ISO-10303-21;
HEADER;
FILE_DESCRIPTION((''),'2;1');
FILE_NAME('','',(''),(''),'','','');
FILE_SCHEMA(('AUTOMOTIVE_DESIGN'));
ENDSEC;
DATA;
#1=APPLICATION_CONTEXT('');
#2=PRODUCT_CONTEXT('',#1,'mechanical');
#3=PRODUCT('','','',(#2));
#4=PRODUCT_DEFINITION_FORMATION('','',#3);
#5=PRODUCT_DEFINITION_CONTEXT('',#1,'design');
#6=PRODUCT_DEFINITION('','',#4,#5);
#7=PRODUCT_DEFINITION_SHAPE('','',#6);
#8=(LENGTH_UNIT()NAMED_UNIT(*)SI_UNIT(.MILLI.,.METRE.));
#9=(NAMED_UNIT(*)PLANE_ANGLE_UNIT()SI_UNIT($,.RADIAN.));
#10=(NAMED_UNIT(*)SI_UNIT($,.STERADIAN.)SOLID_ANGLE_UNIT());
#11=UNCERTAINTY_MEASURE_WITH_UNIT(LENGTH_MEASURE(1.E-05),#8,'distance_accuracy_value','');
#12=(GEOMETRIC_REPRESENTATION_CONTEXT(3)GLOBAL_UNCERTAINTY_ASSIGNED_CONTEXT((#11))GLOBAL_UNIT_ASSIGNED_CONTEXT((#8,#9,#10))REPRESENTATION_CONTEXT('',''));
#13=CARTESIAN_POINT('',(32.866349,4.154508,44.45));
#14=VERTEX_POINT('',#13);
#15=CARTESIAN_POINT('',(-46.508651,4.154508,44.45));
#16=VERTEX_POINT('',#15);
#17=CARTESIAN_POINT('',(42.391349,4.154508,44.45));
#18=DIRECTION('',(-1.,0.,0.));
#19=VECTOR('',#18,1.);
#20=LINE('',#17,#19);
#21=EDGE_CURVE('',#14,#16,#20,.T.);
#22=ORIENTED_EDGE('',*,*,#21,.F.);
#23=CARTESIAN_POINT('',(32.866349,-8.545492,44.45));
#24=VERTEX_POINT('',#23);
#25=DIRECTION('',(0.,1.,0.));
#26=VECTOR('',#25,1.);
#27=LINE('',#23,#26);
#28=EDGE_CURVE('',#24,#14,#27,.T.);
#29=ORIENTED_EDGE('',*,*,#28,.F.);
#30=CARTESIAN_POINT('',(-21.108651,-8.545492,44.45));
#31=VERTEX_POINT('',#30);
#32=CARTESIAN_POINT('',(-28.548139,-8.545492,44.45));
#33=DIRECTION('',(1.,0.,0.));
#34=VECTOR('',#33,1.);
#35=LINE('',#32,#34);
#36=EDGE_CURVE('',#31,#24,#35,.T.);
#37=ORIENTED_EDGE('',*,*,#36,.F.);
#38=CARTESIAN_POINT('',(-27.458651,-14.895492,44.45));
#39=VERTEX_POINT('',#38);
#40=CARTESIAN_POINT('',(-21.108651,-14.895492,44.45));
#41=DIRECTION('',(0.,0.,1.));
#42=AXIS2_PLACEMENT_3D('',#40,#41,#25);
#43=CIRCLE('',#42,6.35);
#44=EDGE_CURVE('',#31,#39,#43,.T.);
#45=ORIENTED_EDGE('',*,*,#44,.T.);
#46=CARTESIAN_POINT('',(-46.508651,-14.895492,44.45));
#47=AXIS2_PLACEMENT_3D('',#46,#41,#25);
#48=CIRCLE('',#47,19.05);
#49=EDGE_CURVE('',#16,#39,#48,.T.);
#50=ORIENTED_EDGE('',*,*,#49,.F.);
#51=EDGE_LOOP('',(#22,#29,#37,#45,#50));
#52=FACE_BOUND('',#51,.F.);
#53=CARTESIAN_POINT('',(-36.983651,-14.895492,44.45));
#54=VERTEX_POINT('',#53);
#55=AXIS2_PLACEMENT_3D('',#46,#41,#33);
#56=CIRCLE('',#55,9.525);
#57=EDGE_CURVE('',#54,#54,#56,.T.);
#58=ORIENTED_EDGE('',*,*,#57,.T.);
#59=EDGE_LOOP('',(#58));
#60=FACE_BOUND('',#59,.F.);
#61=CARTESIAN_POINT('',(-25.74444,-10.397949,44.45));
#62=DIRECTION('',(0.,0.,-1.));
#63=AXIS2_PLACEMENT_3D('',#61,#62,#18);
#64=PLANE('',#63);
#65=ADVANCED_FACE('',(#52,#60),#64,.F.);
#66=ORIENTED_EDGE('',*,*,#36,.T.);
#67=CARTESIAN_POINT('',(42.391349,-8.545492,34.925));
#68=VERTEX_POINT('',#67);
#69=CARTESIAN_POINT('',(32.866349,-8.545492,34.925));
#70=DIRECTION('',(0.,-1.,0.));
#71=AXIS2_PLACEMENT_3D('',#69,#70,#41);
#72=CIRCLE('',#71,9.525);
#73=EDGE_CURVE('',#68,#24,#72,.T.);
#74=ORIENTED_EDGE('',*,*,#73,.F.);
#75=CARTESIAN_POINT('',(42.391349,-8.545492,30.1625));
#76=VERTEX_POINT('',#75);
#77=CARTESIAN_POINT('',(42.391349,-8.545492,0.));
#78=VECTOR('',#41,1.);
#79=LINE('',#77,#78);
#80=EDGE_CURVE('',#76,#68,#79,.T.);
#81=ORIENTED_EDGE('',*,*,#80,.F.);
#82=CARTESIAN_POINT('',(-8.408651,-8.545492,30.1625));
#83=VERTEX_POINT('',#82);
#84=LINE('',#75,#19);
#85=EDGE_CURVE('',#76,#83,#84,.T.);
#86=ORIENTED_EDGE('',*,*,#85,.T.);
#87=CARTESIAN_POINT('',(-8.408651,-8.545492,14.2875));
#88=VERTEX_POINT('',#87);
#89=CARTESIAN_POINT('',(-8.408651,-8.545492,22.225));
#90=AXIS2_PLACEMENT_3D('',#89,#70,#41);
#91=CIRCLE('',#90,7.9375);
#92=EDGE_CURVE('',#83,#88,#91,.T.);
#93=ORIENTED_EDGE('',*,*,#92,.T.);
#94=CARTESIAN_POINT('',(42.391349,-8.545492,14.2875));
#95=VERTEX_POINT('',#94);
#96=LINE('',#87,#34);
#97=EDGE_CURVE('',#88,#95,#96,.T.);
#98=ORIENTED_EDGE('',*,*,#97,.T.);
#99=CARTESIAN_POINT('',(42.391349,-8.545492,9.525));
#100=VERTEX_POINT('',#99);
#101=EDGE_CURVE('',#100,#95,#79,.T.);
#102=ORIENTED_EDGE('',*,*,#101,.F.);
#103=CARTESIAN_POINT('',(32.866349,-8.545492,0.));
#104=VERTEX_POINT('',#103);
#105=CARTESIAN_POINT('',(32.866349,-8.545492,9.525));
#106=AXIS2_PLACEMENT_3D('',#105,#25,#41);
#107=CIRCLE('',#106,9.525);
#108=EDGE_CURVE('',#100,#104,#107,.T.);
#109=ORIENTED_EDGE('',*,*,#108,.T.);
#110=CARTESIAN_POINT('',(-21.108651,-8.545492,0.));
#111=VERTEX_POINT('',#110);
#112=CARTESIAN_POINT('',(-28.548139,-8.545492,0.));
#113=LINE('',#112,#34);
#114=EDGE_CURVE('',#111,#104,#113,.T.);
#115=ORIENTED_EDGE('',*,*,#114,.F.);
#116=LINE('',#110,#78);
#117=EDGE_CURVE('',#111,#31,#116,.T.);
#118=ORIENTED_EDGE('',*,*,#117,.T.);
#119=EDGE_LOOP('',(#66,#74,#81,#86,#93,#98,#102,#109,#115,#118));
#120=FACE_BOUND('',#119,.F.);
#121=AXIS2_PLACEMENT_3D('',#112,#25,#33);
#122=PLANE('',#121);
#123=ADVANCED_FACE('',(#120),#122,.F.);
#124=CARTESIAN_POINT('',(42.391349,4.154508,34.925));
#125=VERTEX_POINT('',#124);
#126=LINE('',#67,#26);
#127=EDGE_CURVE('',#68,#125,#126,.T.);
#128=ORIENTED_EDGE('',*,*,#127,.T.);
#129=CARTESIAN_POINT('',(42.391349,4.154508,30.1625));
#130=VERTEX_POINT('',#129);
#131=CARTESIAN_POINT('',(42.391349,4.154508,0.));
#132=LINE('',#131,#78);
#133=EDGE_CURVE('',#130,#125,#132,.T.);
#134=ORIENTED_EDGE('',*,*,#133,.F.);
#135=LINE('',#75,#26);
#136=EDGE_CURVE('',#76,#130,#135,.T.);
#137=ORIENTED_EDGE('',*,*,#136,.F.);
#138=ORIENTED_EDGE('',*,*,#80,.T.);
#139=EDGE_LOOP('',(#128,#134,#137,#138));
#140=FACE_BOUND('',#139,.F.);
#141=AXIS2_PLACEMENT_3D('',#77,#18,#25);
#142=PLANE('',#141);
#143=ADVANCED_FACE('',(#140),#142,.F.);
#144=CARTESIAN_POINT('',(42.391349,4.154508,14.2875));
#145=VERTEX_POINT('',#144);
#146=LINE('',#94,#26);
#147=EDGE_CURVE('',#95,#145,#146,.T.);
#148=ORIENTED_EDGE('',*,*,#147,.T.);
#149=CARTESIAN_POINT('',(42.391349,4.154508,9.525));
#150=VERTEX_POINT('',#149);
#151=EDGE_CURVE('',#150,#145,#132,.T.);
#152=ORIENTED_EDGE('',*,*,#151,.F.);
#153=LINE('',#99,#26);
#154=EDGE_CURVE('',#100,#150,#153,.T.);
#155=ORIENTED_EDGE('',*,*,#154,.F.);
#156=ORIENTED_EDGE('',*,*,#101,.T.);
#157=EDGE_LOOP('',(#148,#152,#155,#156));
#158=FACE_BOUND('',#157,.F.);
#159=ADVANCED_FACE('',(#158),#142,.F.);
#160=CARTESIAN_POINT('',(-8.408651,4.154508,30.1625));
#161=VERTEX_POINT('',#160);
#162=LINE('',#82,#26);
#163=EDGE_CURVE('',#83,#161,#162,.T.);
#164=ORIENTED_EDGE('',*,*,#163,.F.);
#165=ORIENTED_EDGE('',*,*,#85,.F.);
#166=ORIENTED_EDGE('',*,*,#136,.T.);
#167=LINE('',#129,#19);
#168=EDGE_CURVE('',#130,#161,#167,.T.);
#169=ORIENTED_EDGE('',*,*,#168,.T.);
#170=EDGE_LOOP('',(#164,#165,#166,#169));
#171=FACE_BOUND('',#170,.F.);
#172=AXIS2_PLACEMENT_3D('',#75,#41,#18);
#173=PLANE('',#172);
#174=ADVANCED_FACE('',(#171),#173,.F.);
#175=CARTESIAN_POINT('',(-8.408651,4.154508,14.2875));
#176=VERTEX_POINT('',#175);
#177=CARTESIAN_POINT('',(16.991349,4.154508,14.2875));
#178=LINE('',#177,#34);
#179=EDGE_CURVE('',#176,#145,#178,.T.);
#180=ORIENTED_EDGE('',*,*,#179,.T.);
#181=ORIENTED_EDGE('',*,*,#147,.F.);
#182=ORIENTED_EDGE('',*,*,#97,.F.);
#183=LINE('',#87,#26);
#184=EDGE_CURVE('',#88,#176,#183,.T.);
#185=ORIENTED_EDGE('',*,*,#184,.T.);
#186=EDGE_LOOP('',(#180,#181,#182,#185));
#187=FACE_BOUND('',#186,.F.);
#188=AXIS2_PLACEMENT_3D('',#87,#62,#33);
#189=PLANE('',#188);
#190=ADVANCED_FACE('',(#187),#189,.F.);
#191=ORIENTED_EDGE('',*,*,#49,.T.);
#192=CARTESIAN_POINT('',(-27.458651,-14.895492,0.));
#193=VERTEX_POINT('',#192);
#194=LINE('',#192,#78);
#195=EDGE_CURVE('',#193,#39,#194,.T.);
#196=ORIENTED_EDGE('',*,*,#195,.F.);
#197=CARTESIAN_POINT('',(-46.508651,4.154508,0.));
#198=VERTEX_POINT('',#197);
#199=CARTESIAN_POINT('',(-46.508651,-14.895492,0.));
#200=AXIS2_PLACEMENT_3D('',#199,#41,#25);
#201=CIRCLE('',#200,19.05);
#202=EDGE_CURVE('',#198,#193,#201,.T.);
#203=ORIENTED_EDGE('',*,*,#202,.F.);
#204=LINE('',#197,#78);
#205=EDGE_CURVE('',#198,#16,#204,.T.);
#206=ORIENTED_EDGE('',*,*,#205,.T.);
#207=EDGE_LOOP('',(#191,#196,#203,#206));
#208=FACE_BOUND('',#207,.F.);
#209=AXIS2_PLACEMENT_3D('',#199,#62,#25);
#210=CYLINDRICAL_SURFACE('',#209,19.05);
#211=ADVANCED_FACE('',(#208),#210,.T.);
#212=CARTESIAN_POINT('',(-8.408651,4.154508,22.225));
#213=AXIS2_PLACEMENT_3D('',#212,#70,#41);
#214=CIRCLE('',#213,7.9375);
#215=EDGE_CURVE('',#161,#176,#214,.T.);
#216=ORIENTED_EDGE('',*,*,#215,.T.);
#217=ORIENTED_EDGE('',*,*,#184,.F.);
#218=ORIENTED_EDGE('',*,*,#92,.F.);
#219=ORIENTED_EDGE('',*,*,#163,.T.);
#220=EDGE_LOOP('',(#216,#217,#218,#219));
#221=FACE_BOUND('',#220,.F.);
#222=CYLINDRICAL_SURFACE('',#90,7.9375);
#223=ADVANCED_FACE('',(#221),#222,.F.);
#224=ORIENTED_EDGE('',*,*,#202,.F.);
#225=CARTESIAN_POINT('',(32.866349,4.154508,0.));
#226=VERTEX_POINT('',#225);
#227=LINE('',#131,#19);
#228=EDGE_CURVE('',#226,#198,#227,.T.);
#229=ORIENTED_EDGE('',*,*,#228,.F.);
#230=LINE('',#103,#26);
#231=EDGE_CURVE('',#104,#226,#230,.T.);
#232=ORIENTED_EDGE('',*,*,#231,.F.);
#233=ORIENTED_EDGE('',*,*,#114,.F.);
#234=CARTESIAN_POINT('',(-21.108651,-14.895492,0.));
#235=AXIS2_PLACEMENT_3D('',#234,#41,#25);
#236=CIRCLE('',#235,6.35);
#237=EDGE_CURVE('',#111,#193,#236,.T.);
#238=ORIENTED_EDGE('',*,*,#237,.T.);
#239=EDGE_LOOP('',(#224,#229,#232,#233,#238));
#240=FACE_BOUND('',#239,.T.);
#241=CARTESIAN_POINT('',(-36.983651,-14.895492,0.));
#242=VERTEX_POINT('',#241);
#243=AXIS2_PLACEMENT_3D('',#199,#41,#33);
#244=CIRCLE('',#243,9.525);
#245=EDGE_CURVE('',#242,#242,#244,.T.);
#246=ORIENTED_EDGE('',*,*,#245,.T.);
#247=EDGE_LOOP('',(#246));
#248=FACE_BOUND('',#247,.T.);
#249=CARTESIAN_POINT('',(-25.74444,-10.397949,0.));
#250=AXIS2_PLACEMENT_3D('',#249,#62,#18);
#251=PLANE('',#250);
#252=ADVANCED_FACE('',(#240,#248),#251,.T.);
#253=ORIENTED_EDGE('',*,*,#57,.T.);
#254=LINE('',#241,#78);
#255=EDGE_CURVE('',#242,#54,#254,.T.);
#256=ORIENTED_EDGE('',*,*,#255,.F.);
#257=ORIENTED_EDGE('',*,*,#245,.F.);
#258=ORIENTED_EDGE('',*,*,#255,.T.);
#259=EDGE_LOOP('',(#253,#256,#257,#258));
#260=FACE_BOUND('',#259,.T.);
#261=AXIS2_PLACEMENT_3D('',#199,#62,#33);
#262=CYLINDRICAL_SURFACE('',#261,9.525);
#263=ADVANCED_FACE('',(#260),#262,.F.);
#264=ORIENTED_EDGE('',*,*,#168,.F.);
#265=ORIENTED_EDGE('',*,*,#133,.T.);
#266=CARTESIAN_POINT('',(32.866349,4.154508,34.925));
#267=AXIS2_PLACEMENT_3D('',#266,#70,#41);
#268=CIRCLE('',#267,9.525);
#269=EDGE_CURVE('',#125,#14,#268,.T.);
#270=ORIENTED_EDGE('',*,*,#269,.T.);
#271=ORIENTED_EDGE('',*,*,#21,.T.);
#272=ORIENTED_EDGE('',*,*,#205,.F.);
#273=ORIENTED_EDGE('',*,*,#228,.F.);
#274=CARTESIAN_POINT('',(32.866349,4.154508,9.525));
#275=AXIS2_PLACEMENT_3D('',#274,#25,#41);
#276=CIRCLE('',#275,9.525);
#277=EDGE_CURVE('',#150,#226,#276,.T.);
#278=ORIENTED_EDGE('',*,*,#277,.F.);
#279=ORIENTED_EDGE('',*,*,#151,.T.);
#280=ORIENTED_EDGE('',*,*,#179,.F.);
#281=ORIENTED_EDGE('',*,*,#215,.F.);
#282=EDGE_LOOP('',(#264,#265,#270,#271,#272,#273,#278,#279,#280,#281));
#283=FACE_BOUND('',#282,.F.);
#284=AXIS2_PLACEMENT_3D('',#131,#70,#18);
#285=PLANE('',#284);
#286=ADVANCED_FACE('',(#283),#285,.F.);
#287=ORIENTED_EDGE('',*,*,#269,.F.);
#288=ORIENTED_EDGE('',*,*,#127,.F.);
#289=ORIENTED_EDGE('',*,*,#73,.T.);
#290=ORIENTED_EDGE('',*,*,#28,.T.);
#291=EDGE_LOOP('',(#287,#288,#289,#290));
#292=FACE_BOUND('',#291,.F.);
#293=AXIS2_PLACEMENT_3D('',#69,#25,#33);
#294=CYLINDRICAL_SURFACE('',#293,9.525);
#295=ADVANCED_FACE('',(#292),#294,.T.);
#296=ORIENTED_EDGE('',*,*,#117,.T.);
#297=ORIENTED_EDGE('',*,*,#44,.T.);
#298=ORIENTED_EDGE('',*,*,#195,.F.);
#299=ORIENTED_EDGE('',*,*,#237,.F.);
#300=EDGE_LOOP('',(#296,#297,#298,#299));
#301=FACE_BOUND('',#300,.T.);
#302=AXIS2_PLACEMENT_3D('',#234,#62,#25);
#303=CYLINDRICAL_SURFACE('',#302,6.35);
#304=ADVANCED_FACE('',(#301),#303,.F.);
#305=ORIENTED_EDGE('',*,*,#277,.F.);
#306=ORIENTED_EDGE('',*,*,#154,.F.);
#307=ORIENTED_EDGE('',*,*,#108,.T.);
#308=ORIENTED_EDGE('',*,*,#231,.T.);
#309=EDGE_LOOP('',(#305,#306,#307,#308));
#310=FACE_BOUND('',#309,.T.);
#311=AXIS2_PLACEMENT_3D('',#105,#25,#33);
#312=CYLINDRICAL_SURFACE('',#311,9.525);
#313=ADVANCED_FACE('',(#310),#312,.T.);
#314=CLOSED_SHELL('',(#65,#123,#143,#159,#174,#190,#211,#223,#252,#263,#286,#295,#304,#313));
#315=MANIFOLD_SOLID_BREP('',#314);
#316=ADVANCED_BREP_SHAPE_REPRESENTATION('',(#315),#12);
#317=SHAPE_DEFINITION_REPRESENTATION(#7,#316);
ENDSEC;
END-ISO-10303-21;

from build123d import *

# Parameters (mm, degrees)
F0_R        = 9.525
F1_DEPTH    = 44.45
F2_R        = 9.525
F3_T1_DEPTH = 44.45
F5_DEPTH    = 12.701


# Not quite as in the source:
# - a fillet or chamfer that OpenCascade refuses, or shapes differently, is made with other operations: its cross-section is extruded or revolved along the edge and cut away or added


with BuildPart() as f1:
    # F0 (on Top) → F1 (new body)
    with BuildSketch(Plane.XY):
        with BuildLine():
            Line((42.3913487732, -8.5454918444), (42.3913487732, 4.1545081556))
            Line((42.3913487732, 4.1545081556), (-46.5086512268, 4.1545081556))
            ThreePointArc((-46.5086512268, 4.1545081556), (-35.5101285987, 0.6587680223), (-28.5481389846, -8.5454918444))
            Line((-28.5481389846, -8.5454918444), (42.3913487732, -8.5454918444))
        make_face()
        with BuildLine():
            ThreePointArc((-28.5481389846, -8.5454918444), (-35.5101285987, 0.6587680223), (-46.5086512268, 4.1545081556))
            ThreePointArc((-46.5086512268, 4.1545081556), (-59.9790354084, -28.365876026), (-27.4586512268, -14.8954918444))
            ThreePointArc((-27.4586512268, -14.8954918444), (-27.7329986654, -11.6740991497), (-28.5481389846, -8.5454918444))
        make_face()
        with Locations((-46.5086512268, -14.8954918444)):
            Circle(F0_R, mode=Mode.SUBTRACT)
    extrude(amount=F1_DEPTH)

    # F2
    f2_edges = [f1.edges().sort_by_distance(p)[0] for p in [
        (42.391349, -2.195492, 44.45),
        (42.391349, -2.195492, 0),
    ]]
    fillet(f2_edges, radius=F2_R)

    # F3: fillet of radius 6.35 on 1 edges, made by hand

    # F3_s2 → F3_t1 (join)
    with BuildSketch(Plane.XY):
        with BuildLine():
            ThreePointArc((-21.1086512268, -8.5454918444), (-25.5987792873, -10.4053637839), (-27.4586512268, -14.8954918444))
            ThreePointArc((-27.4586512268, -14.8954918444), (-27.7329986654, -11.6740991497), (-28.5481389846, -8.5454918444))
            Line((-28.5481389846, -8.5454918444), (-21.1086512268, -8.5454918444))
        make_face()
    extrude(amount=F3_T1_DEPTH)

    # F4 (on face) → F5 (cut, through all)
    with BuildSketch(Plane.XZ.offset(8.5454918444)):
        with BuildLine():
            Line((42.3913487732, 14.2875), (42.3913487732, 30.1625))
            Line((42.3913487732, 30.1625), (-8.4086512268, 30.1625))
            ThreePointArc((-8.4086512268, 30.1625), (-16.3461512268, 22.225), (-8.4086512268, 14.2875))
            Line((-8.4086512268, 14.2875), (42.3913487732, 14.2875))
        make_face()
    extrude(amount=-F5_DEPTH, mode=Mode.SUBTRACT)


solid = f1.part
